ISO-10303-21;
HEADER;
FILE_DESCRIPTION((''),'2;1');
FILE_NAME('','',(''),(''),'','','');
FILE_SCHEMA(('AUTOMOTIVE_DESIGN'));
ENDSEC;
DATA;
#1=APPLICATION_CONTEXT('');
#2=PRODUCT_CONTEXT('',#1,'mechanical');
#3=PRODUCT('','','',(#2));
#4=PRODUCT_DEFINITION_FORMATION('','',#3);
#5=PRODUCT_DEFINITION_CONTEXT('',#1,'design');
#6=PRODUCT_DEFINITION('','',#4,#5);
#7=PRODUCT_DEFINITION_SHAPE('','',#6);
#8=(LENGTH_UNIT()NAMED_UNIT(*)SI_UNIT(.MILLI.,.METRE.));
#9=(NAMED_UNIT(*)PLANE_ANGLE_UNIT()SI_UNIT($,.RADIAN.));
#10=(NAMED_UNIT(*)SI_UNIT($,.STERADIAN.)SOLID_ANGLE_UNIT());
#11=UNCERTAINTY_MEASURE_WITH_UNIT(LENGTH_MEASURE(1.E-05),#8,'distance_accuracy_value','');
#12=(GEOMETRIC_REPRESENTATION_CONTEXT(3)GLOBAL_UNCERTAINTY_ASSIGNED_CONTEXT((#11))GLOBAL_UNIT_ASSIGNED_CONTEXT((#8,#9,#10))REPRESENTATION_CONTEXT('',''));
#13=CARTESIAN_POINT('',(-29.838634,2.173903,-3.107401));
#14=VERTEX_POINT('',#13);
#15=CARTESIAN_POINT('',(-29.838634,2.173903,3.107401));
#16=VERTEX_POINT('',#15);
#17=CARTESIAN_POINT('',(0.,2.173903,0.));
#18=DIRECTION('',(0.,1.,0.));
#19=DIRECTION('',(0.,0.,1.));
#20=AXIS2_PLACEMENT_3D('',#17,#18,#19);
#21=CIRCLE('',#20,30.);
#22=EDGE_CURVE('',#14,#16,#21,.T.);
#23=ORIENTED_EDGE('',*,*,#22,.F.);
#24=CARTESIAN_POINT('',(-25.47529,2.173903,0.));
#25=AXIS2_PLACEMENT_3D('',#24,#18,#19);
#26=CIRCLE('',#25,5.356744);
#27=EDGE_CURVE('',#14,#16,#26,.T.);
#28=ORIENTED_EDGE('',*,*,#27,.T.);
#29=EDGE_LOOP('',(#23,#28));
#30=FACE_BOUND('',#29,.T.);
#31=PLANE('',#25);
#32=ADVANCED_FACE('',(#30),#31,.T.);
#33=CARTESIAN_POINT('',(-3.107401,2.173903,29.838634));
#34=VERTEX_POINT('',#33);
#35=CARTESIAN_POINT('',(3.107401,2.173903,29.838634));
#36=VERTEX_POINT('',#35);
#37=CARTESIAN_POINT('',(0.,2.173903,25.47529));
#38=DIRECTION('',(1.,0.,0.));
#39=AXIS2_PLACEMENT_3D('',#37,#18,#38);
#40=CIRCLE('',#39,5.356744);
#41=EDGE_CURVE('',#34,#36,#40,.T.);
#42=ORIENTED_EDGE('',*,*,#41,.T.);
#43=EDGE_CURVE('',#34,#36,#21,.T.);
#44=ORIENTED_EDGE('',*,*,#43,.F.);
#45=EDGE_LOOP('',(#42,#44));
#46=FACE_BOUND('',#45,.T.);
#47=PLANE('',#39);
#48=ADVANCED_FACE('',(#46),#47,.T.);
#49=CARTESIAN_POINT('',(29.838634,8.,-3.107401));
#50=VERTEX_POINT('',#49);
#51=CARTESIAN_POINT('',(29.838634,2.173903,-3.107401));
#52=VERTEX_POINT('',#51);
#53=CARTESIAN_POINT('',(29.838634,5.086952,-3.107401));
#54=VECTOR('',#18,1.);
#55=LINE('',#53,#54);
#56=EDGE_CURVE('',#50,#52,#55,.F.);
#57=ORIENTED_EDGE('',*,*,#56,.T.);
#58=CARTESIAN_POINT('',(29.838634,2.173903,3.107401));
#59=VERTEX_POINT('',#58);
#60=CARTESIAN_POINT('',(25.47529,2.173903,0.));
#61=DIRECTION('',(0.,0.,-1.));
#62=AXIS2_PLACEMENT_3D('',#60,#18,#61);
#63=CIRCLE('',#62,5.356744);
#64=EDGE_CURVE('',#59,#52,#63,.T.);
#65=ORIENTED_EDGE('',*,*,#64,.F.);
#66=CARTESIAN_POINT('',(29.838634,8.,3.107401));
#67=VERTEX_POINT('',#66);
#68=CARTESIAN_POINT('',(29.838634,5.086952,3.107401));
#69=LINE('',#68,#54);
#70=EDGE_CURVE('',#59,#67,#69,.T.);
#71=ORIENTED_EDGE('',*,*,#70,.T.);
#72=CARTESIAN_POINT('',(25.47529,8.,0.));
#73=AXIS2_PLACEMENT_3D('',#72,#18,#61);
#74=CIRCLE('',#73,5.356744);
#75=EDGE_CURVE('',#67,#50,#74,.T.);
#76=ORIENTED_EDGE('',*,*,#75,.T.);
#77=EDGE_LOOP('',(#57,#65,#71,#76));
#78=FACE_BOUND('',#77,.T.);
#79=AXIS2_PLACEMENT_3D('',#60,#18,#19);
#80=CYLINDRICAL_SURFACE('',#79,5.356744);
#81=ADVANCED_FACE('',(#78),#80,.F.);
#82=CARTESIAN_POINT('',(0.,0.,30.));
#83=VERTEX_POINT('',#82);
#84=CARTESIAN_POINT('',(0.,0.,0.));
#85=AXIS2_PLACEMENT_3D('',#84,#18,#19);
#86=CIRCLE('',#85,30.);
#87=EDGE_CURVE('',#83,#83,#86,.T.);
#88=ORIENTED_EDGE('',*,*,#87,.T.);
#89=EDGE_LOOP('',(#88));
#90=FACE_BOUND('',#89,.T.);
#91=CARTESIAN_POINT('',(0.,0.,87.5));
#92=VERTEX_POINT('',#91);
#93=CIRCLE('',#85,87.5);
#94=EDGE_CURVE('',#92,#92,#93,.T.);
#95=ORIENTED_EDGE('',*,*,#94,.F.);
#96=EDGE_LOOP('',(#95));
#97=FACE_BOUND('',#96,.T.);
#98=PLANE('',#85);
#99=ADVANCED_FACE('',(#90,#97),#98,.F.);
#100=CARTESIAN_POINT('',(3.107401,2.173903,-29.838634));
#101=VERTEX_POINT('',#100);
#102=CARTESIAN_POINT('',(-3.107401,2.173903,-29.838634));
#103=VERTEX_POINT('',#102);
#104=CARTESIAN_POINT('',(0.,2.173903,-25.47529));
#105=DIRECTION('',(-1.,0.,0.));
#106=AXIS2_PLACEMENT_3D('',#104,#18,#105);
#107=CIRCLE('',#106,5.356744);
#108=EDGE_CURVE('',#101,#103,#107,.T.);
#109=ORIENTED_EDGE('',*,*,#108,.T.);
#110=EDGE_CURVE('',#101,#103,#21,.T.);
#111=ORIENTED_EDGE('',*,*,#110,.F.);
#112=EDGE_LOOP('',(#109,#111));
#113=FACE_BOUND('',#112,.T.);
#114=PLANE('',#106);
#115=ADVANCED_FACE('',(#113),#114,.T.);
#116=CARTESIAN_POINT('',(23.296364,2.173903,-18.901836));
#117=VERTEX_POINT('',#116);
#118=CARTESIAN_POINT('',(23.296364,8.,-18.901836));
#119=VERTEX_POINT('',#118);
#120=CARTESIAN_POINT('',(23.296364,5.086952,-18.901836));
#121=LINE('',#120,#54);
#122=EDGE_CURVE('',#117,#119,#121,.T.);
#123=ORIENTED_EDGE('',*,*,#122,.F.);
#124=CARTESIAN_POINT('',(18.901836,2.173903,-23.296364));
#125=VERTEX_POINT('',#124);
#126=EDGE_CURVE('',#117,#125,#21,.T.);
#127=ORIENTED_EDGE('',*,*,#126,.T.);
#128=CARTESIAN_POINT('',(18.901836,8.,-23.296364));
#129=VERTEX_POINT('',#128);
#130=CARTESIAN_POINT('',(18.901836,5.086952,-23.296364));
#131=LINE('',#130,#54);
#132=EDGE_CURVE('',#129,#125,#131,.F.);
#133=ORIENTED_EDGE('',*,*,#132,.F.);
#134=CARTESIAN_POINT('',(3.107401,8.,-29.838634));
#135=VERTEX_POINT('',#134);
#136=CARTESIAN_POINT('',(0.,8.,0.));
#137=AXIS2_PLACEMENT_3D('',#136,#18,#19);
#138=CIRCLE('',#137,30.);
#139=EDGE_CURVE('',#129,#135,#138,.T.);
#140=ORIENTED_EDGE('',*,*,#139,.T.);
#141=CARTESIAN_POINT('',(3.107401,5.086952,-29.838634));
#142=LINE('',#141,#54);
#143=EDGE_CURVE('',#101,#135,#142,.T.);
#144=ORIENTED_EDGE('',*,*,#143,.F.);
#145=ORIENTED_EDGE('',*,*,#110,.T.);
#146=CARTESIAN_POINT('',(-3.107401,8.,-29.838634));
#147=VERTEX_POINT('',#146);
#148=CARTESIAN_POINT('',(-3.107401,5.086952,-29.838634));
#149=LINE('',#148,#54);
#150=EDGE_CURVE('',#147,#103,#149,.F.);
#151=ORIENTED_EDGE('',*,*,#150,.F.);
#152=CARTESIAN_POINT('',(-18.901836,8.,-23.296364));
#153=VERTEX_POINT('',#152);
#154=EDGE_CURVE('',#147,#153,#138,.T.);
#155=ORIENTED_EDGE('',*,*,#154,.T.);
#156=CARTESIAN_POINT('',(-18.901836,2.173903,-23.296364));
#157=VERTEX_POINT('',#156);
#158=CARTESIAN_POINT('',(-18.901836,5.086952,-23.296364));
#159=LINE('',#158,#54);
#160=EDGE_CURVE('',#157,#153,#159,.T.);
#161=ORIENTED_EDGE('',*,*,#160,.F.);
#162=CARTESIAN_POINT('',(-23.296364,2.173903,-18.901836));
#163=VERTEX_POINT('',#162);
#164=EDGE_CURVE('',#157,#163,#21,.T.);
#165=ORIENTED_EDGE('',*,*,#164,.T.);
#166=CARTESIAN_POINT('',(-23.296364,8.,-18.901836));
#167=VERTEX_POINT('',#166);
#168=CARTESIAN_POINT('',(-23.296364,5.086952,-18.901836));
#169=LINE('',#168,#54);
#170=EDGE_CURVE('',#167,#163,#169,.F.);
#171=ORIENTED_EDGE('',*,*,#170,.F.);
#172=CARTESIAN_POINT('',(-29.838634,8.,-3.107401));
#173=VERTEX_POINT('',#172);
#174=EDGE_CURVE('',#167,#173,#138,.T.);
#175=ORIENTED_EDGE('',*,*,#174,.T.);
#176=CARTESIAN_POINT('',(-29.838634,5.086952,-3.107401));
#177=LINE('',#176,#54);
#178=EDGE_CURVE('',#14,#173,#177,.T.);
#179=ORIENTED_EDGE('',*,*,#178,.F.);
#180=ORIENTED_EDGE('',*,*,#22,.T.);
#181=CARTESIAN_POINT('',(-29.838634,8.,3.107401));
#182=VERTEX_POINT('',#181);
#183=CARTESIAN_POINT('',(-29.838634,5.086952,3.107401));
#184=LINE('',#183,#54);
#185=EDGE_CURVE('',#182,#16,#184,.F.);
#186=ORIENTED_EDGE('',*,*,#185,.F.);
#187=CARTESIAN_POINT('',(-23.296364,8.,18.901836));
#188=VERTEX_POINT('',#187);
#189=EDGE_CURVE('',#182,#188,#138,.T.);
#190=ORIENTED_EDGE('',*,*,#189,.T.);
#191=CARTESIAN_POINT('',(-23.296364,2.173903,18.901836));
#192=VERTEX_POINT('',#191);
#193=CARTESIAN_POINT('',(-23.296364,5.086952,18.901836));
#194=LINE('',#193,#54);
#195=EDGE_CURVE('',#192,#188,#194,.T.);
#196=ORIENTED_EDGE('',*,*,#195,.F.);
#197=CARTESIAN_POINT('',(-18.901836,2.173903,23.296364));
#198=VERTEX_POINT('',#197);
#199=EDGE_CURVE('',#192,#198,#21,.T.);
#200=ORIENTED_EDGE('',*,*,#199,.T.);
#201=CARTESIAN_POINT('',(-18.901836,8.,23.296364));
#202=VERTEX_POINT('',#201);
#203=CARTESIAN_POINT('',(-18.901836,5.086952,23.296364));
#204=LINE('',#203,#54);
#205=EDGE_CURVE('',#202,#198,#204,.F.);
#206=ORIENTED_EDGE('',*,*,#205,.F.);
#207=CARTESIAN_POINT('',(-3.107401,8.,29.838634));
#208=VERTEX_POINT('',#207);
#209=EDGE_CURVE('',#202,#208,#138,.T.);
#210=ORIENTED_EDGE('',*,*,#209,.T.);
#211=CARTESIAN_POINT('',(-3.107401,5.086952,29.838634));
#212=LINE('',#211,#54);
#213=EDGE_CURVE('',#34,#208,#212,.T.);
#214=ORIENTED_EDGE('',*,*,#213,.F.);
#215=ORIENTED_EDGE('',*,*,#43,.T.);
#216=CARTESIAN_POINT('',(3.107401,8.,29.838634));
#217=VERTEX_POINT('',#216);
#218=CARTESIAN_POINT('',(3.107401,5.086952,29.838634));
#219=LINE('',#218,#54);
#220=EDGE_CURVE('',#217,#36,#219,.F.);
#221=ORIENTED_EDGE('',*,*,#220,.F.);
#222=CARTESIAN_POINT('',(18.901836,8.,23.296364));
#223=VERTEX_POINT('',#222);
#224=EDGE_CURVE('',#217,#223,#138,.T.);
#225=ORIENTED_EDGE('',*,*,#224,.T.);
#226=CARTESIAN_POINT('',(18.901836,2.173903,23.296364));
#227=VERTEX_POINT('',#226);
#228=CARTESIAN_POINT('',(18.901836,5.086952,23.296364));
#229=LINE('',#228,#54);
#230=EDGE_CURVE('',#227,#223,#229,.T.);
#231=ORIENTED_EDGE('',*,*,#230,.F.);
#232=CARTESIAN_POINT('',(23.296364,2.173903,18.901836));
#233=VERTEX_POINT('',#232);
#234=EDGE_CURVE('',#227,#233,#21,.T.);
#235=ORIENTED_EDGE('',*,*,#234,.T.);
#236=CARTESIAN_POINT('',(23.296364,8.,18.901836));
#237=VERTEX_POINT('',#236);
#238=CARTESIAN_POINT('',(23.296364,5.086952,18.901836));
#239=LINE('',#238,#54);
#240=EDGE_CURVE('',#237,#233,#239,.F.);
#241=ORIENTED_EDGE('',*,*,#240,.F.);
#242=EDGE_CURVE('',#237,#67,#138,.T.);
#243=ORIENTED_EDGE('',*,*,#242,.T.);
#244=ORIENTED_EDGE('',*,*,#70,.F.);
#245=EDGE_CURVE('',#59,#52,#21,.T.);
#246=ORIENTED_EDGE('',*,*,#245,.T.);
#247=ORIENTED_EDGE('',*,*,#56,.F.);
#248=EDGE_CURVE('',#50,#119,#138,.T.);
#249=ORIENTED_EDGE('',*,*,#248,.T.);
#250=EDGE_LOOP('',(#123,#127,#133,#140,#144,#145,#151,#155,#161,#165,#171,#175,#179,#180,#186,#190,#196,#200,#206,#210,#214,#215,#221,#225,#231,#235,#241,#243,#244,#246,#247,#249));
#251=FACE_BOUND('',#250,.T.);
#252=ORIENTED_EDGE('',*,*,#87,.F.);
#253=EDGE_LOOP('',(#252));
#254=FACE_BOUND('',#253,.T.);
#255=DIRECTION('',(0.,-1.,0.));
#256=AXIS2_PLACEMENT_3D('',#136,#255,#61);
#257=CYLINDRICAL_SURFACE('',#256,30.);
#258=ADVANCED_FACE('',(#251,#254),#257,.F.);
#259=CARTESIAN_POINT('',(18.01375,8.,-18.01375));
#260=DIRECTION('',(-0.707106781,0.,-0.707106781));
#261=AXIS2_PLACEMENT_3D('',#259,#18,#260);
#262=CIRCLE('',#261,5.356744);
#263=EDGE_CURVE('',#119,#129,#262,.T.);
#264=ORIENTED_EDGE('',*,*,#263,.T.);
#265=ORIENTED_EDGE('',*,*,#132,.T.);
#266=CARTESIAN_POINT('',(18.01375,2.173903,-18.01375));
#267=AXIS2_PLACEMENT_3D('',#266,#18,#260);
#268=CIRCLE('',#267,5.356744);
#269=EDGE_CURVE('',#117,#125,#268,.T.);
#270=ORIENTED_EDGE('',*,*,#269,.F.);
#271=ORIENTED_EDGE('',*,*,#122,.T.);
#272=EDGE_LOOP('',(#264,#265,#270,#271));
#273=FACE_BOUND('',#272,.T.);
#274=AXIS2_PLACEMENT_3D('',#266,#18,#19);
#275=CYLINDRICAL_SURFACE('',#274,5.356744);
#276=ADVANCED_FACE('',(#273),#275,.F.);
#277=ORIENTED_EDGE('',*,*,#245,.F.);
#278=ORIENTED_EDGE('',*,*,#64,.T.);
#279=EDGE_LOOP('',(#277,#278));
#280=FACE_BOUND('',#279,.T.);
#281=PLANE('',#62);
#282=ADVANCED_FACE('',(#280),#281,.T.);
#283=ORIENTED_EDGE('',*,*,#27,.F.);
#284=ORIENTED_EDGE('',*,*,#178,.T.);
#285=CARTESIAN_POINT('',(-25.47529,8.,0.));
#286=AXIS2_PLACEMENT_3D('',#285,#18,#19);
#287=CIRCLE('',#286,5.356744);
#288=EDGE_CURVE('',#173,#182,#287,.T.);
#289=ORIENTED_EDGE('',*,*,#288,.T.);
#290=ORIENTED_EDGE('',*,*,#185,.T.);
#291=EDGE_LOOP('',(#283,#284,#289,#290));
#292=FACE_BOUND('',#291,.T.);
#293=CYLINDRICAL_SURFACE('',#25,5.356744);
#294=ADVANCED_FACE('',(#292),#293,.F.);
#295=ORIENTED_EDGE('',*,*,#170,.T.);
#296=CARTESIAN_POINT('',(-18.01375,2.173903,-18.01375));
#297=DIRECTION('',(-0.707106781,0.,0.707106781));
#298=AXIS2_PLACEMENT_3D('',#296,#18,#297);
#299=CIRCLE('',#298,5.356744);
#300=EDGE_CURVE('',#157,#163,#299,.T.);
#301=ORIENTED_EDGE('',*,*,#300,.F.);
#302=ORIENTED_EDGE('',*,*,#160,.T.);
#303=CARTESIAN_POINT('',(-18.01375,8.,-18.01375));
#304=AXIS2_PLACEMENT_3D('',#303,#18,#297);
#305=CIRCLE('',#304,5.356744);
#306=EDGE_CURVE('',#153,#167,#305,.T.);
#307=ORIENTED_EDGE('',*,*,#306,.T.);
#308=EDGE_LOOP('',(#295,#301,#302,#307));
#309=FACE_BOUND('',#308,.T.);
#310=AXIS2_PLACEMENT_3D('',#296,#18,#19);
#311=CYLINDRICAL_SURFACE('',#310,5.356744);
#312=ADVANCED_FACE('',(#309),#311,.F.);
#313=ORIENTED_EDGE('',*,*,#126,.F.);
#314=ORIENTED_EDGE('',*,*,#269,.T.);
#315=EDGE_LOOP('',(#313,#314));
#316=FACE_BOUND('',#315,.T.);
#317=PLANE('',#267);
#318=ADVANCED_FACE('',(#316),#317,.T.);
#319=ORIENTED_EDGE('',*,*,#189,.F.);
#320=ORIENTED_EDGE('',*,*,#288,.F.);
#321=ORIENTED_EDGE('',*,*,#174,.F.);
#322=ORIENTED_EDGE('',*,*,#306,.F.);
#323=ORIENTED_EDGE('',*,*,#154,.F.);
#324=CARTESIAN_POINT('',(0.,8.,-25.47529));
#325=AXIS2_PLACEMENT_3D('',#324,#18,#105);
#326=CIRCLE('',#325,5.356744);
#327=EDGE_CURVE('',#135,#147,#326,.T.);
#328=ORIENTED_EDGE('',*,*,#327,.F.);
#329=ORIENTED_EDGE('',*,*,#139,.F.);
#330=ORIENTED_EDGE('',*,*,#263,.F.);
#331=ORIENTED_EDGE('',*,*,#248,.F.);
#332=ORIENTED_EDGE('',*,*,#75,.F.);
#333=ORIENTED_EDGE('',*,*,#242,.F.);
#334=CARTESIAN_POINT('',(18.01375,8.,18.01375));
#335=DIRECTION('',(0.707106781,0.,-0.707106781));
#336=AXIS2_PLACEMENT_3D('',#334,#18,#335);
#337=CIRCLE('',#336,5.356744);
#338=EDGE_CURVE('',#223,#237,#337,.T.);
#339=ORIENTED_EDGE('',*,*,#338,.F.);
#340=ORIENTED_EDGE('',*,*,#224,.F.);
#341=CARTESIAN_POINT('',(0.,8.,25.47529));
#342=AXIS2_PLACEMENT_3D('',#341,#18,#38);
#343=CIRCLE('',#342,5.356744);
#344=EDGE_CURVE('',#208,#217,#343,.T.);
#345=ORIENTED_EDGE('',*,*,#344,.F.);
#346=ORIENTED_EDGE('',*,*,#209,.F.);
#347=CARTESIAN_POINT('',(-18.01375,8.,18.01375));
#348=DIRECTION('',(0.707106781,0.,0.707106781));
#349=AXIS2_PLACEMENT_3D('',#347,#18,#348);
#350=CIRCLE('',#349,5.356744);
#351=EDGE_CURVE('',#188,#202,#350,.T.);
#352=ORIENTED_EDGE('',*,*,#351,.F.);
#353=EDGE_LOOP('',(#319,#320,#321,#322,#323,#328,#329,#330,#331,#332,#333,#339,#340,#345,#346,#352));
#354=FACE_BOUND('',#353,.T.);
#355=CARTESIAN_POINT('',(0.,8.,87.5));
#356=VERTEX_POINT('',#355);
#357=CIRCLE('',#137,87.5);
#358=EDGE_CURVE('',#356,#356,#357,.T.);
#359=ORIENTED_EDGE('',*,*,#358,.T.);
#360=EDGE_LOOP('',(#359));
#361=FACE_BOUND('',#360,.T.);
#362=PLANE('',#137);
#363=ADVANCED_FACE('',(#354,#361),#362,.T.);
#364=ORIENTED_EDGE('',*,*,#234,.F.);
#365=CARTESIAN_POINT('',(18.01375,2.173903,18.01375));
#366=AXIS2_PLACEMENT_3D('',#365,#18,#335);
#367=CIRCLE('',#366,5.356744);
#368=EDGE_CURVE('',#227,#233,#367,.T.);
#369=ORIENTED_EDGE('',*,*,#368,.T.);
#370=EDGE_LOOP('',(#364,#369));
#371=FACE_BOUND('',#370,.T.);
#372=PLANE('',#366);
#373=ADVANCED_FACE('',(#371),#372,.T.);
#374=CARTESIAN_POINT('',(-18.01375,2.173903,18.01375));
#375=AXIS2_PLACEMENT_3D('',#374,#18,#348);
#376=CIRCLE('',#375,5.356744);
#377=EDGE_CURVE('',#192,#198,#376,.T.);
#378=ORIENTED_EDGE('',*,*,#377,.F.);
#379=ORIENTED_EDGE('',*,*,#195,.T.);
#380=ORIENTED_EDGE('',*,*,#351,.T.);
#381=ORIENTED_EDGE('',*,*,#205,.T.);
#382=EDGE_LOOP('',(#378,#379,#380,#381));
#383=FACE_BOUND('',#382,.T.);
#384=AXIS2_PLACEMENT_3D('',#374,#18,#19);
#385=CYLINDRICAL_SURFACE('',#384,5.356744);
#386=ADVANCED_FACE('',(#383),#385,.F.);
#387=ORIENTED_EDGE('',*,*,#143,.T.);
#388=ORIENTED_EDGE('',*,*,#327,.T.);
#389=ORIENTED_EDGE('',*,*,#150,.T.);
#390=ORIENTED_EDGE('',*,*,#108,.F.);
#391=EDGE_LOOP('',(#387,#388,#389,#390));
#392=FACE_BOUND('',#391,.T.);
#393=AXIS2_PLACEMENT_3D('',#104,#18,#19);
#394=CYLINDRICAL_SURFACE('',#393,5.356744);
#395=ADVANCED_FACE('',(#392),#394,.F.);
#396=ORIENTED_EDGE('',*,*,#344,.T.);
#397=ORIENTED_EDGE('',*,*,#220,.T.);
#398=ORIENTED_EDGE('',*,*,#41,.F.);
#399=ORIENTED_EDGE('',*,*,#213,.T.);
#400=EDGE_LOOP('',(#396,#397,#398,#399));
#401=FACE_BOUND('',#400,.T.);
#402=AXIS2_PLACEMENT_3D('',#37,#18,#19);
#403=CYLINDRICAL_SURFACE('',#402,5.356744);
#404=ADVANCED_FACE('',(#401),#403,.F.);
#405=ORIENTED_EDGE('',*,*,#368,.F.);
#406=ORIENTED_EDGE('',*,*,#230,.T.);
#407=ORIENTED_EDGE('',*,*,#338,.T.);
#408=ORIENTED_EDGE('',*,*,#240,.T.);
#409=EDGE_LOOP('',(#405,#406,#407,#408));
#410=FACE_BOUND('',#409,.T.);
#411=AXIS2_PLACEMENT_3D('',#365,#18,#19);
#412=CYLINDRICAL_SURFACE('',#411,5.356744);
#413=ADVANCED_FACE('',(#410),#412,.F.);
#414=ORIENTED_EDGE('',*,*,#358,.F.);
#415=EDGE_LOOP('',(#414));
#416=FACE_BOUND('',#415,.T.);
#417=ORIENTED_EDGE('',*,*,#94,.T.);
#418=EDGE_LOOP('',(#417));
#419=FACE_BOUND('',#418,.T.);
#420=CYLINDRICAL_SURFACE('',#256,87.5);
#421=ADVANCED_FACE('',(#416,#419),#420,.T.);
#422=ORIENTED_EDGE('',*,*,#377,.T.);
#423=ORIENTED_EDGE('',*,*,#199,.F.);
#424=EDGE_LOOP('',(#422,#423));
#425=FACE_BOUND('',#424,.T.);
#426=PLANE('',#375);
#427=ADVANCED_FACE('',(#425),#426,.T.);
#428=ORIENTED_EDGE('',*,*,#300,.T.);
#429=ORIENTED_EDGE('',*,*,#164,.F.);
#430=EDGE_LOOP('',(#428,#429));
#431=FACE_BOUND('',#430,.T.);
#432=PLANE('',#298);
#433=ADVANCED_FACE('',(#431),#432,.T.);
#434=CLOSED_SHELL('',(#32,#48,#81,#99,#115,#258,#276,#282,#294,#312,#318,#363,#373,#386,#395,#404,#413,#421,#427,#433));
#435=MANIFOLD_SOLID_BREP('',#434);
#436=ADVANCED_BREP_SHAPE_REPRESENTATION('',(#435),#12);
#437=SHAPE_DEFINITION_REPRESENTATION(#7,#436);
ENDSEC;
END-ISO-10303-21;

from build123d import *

# Parameters (mm, degrees)
SKETCH1_R           = 87.5
BOSS_EXTRUDE1_DEPTH = 8
SKETCH2_R           = 30
CUT_EXTRUDE1_DEPTH  = 125.002016113
SKETCH3_R           = 5.356744443
CUT_EXTRUDE2_DEPTH  = 5.826096891
CIRPATTERN1_COUNT   = 8


with BuildPart() as part:
    # Sketch1 → Boss-Extrude1 (new body)
    with BuildSketch(Plane(origin=(0, 0, 0), x_dir=(1, 0, 0), z_dir=(0, 1, 0))):
        Circle(SKETCH1_R)
    extrude(amount=BOSS_EXTRUDE1_DEPTH)

    # Sketch2 → Cut-Extrude1 (cut, through all)
    with BuildSketch(Plane(origin=(0, 0, 0), x_dir=(1, 0, 0), z_dir=(0, 1, 0))):
        Circle(SKETCH2_R)
    extrude(amount=CUT_EXTRUDE1_DEPTH, mode=Mode.SUBTRACT)

    # Sketch3 → Cut-Extrude2 (cut)
    with BuildSketch(Plane(origin=(0, 8, 0), x_dir=(1, 0, 0), z_dir=(0, 1, 0))):
        with Locations((-25.47528954, 0)):
            Circle(SKETCH3_R)
    cut_extrude2 = extrude(amount=-CUT_EXTRUDE2_DEPTH, mode=Mode.SUBTRACT)

    # CirPattern1: Cut-Extrude2 ×8 about axis
    cirpattern1_axis = Axis((0, 0, 0), (0, 1, 0))
    for i in range(1, CIRPATTERN1_COUNT):
        add(cut_extrude2.rotate(cirpattern1_axis, i * 360 / CIRPATTERN1_COUNT), mode=Mode.SUBTRACT)


solid = part.part
